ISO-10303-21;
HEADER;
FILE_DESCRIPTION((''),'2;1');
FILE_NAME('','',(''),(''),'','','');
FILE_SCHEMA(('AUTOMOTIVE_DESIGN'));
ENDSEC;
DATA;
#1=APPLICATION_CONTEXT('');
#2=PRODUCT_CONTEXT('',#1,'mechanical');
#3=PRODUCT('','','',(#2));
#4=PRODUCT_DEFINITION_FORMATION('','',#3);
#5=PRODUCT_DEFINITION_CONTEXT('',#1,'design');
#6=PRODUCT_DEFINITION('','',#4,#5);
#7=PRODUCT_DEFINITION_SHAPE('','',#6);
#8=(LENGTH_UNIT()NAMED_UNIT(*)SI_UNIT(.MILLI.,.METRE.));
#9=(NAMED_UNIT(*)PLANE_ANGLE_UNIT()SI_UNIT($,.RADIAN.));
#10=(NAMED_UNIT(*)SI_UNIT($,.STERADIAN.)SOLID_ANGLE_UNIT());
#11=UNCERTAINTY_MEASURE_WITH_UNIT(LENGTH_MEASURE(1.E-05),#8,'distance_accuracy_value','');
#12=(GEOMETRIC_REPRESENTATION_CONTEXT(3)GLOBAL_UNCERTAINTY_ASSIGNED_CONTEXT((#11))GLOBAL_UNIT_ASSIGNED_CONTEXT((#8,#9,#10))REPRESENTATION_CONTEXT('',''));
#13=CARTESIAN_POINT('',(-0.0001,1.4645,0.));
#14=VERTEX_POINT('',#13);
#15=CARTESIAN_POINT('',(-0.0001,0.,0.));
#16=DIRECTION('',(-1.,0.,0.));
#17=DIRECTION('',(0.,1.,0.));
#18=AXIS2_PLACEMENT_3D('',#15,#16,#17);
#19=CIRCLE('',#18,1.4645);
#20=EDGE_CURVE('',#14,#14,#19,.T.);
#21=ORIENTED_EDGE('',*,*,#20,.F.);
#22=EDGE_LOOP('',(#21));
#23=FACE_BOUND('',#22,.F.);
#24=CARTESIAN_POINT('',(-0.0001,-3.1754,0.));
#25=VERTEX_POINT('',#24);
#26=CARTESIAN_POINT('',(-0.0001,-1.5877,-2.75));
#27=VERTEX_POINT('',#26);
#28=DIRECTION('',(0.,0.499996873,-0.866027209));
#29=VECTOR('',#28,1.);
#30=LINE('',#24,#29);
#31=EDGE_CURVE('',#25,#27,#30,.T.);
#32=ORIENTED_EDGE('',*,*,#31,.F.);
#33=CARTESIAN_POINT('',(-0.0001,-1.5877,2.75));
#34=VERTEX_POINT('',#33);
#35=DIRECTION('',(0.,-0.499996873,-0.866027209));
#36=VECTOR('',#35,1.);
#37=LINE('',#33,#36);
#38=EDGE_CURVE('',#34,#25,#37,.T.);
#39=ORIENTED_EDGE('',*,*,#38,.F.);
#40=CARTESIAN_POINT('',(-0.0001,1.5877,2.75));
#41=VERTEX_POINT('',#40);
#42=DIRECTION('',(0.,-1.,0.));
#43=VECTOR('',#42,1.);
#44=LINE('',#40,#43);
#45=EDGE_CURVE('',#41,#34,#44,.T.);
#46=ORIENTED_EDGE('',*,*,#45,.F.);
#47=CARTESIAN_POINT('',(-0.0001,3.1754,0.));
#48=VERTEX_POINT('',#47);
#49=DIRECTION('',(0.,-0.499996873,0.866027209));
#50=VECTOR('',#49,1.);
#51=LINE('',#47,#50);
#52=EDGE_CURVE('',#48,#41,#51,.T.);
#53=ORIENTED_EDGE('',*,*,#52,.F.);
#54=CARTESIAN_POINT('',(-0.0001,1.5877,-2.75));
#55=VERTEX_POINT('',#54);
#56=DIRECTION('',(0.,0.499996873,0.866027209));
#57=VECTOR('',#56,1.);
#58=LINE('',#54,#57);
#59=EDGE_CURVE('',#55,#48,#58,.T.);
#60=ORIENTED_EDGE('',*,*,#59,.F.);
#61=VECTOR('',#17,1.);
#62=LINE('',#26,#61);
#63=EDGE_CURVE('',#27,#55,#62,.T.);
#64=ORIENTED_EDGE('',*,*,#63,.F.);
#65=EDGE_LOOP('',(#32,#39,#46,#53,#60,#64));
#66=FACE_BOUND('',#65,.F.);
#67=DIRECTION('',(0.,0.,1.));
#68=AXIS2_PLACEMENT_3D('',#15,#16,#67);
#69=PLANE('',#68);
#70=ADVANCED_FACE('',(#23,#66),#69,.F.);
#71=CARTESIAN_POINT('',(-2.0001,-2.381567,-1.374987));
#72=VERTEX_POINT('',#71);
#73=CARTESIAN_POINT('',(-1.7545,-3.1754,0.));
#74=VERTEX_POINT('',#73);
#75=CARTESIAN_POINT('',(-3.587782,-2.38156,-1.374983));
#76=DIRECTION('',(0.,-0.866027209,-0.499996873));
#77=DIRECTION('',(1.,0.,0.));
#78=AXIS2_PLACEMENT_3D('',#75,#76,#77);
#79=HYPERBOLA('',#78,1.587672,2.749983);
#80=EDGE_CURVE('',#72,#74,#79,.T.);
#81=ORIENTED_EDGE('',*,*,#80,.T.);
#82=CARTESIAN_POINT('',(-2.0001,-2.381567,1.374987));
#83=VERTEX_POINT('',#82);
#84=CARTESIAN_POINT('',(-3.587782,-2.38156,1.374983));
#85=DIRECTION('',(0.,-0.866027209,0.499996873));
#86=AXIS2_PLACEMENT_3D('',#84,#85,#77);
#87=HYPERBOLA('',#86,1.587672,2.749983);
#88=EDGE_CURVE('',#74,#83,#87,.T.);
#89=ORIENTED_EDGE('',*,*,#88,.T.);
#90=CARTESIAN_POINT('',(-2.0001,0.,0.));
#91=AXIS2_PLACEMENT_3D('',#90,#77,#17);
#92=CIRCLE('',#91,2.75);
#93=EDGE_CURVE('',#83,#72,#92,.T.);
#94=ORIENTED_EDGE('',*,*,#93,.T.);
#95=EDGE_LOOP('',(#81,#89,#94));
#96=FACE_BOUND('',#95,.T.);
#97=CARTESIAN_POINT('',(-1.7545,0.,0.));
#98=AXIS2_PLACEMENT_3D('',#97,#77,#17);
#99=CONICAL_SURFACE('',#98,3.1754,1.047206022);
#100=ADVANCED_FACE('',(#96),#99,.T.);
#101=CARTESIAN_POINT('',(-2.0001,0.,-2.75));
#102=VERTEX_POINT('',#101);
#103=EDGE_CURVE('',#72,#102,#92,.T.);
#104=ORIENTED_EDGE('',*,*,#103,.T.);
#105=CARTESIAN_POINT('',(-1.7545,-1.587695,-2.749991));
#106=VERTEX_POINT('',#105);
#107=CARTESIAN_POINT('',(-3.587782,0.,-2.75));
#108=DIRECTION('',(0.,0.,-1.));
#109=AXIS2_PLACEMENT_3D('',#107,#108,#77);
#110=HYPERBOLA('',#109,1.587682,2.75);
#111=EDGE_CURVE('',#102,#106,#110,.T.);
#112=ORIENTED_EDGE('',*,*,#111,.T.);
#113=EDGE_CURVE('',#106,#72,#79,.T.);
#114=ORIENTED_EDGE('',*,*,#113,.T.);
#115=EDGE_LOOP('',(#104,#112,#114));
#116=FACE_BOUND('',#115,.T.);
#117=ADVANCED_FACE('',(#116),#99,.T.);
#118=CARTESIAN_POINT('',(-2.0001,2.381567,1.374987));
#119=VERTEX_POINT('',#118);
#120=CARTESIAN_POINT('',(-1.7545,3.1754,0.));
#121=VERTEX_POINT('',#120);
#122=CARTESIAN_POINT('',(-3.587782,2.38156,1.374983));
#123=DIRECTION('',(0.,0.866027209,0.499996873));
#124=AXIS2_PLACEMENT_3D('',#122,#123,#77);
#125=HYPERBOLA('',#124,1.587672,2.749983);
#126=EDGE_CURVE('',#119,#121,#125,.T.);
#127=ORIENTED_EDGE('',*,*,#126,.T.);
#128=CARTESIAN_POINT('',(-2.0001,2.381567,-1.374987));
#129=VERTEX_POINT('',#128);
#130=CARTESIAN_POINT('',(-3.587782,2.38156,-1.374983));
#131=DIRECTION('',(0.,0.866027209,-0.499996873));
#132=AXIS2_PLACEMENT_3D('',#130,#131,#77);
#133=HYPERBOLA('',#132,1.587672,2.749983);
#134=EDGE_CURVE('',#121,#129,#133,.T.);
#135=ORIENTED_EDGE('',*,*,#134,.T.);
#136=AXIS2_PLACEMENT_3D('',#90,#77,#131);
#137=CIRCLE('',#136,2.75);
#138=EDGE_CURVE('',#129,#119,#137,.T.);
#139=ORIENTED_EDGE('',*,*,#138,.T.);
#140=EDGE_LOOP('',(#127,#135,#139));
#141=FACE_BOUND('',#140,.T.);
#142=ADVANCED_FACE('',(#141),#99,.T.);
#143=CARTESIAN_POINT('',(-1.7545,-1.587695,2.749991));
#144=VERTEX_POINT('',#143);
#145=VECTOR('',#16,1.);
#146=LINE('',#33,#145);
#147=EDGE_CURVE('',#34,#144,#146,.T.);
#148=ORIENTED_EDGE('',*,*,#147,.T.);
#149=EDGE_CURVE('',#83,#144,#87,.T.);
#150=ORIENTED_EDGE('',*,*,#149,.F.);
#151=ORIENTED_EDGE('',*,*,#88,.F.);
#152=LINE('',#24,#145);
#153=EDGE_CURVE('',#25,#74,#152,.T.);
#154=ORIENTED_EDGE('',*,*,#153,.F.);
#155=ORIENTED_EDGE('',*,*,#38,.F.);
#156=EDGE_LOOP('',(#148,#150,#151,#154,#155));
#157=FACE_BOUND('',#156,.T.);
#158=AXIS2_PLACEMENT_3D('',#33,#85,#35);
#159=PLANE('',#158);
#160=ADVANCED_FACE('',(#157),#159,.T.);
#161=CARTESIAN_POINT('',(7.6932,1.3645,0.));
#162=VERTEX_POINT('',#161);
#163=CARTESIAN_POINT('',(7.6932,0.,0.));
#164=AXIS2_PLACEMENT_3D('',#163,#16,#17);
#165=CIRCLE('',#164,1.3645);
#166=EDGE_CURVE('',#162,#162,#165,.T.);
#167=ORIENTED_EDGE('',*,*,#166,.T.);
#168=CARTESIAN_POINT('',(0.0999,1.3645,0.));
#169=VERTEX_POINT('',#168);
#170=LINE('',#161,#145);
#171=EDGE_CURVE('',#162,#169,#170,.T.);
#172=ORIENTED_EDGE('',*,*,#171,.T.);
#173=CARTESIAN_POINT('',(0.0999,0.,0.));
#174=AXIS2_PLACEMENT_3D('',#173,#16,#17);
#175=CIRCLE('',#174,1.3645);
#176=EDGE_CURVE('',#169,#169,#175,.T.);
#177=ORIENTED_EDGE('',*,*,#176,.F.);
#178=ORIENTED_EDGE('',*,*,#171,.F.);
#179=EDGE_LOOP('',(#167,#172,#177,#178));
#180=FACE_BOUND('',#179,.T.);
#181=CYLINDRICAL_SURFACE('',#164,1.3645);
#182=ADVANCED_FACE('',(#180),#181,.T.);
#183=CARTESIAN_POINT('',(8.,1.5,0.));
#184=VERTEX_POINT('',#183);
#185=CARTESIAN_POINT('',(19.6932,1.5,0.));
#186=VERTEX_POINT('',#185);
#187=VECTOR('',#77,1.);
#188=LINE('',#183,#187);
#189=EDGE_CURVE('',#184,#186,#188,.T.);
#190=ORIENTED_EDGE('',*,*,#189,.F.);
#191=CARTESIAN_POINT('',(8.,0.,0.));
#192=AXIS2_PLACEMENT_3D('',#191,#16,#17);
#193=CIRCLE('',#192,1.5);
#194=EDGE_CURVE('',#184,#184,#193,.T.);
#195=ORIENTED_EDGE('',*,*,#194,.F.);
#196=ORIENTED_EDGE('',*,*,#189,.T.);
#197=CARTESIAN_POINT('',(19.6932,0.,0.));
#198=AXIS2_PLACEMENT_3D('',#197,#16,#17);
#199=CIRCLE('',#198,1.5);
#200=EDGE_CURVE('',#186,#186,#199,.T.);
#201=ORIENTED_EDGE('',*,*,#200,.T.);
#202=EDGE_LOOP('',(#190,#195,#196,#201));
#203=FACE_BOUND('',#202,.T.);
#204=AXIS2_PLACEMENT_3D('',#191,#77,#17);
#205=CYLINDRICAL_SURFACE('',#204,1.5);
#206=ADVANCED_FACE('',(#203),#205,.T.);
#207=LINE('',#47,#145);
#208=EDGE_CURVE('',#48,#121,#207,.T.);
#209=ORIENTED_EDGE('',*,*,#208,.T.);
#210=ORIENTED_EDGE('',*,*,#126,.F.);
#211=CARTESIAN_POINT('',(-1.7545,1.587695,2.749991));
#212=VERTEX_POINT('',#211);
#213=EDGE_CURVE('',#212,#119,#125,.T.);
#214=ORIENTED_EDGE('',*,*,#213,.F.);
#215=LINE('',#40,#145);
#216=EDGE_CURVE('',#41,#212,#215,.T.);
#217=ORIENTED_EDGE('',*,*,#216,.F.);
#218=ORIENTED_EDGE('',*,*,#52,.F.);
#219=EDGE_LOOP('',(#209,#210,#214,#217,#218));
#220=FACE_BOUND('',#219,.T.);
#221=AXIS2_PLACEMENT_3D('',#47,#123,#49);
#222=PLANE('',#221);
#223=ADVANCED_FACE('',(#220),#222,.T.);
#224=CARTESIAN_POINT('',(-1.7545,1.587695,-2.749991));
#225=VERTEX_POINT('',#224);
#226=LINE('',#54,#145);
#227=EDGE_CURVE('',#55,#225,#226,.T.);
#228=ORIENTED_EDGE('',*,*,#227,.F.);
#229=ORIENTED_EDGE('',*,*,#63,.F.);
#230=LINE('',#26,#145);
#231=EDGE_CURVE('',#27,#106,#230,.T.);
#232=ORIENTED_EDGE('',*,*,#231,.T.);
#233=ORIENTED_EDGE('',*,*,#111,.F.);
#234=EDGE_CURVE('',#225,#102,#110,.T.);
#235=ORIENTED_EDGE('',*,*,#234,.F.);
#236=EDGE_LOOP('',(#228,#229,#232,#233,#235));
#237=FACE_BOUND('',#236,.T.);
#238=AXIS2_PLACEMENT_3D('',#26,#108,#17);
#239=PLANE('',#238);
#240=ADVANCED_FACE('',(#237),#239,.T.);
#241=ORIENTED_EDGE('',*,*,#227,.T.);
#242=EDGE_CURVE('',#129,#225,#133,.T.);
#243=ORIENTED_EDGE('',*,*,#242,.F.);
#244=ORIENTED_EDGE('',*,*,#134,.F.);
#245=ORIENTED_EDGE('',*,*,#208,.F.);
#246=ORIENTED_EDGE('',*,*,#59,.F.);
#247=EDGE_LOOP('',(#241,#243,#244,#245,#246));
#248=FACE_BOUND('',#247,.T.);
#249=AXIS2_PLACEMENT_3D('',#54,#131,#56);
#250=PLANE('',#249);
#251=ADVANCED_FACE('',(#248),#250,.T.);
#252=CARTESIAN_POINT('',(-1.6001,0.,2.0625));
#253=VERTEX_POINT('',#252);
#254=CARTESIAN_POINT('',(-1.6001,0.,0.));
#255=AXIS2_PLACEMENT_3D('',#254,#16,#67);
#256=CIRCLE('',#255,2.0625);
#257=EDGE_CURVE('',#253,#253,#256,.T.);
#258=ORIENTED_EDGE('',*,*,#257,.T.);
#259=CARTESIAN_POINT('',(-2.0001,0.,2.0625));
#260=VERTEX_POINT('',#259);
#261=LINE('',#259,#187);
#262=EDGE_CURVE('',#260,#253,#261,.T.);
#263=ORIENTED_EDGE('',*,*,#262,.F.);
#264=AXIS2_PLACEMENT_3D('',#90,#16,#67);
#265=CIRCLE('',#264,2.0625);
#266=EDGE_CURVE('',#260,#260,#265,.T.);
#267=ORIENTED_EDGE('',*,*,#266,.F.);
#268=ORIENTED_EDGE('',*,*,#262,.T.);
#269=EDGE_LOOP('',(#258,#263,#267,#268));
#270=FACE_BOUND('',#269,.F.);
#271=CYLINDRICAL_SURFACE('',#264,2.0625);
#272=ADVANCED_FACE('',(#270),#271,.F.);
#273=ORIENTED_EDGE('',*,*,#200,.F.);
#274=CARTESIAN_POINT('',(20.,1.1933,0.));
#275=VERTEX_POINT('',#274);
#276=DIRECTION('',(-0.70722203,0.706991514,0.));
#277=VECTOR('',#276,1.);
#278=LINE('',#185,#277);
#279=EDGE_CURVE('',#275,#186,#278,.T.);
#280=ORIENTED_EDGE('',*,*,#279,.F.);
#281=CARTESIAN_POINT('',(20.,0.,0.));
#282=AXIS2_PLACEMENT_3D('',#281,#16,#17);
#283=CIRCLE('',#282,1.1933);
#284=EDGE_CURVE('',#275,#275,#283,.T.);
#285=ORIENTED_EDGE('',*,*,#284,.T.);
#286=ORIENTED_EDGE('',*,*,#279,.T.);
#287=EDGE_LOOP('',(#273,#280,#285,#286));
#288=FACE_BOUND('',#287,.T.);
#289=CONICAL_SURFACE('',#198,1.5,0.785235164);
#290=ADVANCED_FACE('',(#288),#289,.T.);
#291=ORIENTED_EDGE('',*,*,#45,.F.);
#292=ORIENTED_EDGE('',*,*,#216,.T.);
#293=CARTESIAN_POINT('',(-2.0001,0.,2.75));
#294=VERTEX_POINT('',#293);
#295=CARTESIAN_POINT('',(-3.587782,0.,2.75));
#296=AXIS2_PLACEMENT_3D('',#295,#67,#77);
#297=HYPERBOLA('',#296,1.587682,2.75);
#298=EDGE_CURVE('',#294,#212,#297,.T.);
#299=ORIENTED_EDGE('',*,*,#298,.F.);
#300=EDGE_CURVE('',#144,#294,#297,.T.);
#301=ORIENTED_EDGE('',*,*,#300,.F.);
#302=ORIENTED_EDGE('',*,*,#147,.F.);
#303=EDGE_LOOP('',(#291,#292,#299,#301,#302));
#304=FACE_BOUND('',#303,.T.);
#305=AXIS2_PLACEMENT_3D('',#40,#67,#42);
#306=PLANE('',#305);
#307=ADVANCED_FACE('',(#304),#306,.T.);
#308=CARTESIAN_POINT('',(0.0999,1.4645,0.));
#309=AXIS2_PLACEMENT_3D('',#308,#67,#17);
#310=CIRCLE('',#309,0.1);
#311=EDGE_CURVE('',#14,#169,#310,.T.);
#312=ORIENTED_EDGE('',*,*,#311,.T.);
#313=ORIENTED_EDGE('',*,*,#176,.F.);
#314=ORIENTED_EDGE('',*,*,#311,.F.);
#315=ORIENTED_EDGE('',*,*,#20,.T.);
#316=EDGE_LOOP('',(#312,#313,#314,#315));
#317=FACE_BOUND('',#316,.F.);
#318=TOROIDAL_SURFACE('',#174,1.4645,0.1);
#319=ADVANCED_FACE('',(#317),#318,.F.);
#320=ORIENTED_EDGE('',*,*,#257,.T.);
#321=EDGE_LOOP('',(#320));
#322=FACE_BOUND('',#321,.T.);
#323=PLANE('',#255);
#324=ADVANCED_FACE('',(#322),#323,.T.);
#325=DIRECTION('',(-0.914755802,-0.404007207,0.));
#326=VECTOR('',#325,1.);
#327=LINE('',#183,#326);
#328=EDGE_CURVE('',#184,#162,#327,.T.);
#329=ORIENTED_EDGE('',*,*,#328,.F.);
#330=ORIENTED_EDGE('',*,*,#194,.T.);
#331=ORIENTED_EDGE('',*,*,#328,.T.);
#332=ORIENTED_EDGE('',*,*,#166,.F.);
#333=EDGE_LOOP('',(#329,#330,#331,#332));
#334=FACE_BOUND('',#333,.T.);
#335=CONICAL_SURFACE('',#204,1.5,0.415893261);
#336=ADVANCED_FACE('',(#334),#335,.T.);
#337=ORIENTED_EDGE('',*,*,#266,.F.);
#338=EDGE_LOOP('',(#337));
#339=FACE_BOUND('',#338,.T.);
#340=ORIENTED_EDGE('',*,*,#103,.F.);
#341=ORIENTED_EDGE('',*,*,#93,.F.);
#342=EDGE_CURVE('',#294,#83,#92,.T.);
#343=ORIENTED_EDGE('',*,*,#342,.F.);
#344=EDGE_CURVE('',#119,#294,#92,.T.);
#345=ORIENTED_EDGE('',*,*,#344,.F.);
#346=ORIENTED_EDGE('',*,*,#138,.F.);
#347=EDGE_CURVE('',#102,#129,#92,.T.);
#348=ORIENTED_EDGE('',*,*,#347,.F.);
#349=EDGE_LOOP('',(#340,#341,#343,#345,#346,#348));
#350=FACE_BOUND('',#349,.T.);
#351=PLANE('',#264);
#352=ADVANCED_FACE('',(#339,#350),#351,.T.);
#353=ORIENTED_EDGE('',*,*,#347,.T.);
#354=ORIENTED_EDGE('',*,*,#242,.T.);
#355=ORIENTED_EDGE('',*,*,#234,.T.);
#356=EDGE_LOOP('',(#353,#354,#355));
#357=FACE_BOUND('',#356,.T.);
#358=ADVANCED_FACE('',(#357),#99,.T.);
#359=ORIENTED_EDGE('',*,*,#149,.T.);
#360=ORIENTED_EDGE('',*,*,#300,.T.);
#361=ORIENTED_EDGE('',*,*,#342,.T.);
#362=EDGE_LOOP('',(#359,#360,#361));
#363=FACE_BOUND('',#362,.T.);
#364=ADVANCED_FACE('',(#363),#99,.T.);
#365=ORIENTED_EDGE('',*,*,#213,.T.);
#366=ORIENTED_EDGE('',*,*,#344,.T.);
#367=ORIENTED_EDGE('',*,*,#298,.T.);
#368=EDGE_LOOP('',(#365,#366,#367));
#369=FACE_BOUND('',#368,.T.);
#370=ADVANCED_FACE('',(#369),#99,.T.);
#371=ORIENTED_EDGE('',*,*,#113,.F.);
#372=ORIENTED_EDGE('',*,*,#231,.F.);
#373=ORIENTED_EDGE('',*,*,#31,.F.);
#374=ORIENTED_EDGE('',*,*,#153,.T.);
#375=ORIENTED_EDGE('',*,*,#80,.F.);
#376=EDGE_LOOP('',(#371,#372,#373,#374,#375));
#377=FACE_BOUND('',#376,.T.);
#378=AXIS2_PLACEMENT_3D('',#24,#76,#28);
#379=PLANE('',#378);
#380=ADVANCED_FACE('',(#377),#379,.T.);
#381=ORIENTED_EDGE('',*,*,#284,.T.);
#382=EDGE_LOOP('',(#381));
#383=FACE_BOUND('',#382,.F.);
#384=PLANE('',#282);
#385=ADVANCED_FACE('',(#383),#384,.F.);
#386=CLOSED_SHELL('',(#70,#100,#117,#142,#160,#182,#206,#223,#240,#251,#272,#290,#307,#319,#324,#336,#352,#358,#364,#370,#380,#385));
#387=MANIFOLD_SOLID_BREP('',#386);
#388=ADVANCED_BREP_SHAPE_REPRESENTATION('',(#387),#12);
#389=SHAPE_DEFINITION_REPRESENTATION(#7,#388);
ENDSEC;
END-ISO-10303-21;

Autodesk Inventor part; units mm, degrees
ref_plane "YZ Plane" through (0, 0, 0) normal (1, 0, 0) x (0, 1, 0)
ref_plane "XZ Plane" through (0, 0, 0) normal (0, 1, 0) x (-1, 0, 0)
sketch "Sketch1" plane through (0, 0, 0) normal (0, 0, 1) x (1, 0, 0)
  line L0 (0, 2.2) -> (0, 1.3645)
  line L1 (8, 1.5) -> (20, 1.5)
  line L2 (20, 1.5) -> (20, 0)
  line L3 (20, 0) -> (-0.0001, 0)
  line L4 (-4.0001, 0) -> (24, 0) projected
  line L5 (-0.0001, 0) -> (-0.0001, 2.2)
  line L6 (-0.0001, 2.2) -> (0, 2.2)
  line L7 (8, 1.5) -> (7.6932, 1.3645)
  line L8 (7.6932, 1.3645) -> (0, 1.3645)
  line L9 (0, -0.44) -> (0, 2.64) projected
  line L10 (7.6932, 1.3645) -> (7.6932, 0) construction
  line L11 (8, 1.5) -> (8, 0) construction
  dimension "d0" = 20
  dimension "d1" = 12
  dimension "d2" = 3
  dimension "d9" = 0.0001
  dimension "d10" = 4.4
  dimension "d13" = 0.3068
  dimension "d14" = 2.729
revolve "Body" add sketch "Sketch1" angle 360 about axis through (20, 0, 0) along (-1, 0, 0)
sketch "Sketch2" plane through (-0.0001, 0, 0) normal (-1, 0, 0) x (0, 0, 1)
  line L0 (0, 3.1754) -> (2.75, 1.5877)
  line L1 (2.75, 1.5877) -> (2.75, -1.5877)
  line L2 (2.75, -1.5877) -> (0, -3.1754)
  line L3 (0, -3.1754) -> (-2.75, -1.5877)
  line L4 (-2.75, -1.5877) -> (-2.75, 1.5877)
  line L5 (-2.75, 1.5877) -> (0, 3.1754)
  point P0 (0, 0)
  point P1 (0, 0)
  dimension "d11" = 5.5
extrude "Head" add sketch "Sketch2" along normal blind 2
sketch "Sketch3" plane through (-2.0001, 0, 0) normal (-1, 0, 0) x (0, 0, 1)
  circle A0 centre (0, 0) radius 2.0625
  point P0 (0, 0)
  dimension "d19" = 4.125
extrude "Indent1" cut sketch "Sketch3" against normal blind 0.4
sketch "Sketch4" plane through (0, 0, 0) normal (0, 0, 1) x (1, 0, 0)
  line L0 (-2.0001, 2.75) -> (-2.0001, 3.1754)
  line L1 (-2.0001, 3.1754) -> (-1.7545, 3.1754)
  line L2 (-1.7545, 3.1754) -> (-2.0001, 2.75)
  line L3 (-2.4001, 0) -> (0.3999, 0) projected
  line L4 (-0.0001, 3.1754) -> (-2.0001, 3.1754) projected
  line L5 (-2.0001, 1.5877) -> (-2.0001, 3.1754) projected
  dimension "d5" = 30
  dimension "d23" = 5.5
revolve "Chamfer1" cut sketch "Sketch4" angle 360 about axis through (-10, 0, 0) along (1, 0, 0)
fillet "Fillet1" radius 0.1 1 edges at (0, -1.3645, 0)
thread "Thread" size "M3x0.5" designation "M3" class "6g" standard "GB Metric profile" length 12
chamfer "Chamfer2" distance 0.3067 distance2 0.3068 1 edges at (20, -1.5, 0) measured on face at (20, -0.3888, -0.2119)
ref_plane "Work Plane1" through (14, 0, 0) normal (0, 0, -1) x (1, 0, 0)
equation "\"d0\" = NLG"
equation "\"d1\" = GEL"
equation "\"d2\" = GD"
equation "\"d10\" = SD2"
equation "\"d14\" = BDM"
equation "\"d11\" = SW"
equation "\"d3\" = KOH - SD"
equation "\"d19\" = 0.75 * SW0"
equation "\"d20\" = 0.2 * KOH"
equation "\"d5\" = ANG1"
equation "\"d23\" = SW0"
equation "\"d18\" = RR"
equation "\"d15\" = GEL"
equation "\"d6\" = -0.5 * SPD + 0.5 * GD"
equation "\"NLG\" = 20"
equation "\"GD\" = NND"
equation "\"BDM\" = 2.729"
equation "\"KOH\" = 2"
equation "\"GEL\" = 12"
equation "\"SW\" = 5.5"
equation "\"SW0\" = SW"
equation "\"SPD\" = NND - 1.2269 * PTC"
equation "\"SD2\" = SDH"
equation "\"SD\" = 0"
equation "\"ANG1\" = 30deg"
equation "\"GAL\" = 0.61345 * PTC"
equation "\"GUL\" = 0.61345 * PTC"
equation "\"RR\" = 0.1"
equation "\"WFT\" = 0"
equation "\"GD1\" = THREADDIA - 1.2269 * PTC"
equation "\"THREADDIA\" = 3"
equation "\"SDH\" = 4.4"
equation "\"TOA\" = 30deg"
equation "\"FAWI\" = 90deg"
equation "\"PTC\" = 0.5"
equation "\"NND\" = 3"
equation "\"E0\" = 1.155 * SW"
properties part number "Bolt GB 5784-86-M3 x 20" material "Steel, Mild"
